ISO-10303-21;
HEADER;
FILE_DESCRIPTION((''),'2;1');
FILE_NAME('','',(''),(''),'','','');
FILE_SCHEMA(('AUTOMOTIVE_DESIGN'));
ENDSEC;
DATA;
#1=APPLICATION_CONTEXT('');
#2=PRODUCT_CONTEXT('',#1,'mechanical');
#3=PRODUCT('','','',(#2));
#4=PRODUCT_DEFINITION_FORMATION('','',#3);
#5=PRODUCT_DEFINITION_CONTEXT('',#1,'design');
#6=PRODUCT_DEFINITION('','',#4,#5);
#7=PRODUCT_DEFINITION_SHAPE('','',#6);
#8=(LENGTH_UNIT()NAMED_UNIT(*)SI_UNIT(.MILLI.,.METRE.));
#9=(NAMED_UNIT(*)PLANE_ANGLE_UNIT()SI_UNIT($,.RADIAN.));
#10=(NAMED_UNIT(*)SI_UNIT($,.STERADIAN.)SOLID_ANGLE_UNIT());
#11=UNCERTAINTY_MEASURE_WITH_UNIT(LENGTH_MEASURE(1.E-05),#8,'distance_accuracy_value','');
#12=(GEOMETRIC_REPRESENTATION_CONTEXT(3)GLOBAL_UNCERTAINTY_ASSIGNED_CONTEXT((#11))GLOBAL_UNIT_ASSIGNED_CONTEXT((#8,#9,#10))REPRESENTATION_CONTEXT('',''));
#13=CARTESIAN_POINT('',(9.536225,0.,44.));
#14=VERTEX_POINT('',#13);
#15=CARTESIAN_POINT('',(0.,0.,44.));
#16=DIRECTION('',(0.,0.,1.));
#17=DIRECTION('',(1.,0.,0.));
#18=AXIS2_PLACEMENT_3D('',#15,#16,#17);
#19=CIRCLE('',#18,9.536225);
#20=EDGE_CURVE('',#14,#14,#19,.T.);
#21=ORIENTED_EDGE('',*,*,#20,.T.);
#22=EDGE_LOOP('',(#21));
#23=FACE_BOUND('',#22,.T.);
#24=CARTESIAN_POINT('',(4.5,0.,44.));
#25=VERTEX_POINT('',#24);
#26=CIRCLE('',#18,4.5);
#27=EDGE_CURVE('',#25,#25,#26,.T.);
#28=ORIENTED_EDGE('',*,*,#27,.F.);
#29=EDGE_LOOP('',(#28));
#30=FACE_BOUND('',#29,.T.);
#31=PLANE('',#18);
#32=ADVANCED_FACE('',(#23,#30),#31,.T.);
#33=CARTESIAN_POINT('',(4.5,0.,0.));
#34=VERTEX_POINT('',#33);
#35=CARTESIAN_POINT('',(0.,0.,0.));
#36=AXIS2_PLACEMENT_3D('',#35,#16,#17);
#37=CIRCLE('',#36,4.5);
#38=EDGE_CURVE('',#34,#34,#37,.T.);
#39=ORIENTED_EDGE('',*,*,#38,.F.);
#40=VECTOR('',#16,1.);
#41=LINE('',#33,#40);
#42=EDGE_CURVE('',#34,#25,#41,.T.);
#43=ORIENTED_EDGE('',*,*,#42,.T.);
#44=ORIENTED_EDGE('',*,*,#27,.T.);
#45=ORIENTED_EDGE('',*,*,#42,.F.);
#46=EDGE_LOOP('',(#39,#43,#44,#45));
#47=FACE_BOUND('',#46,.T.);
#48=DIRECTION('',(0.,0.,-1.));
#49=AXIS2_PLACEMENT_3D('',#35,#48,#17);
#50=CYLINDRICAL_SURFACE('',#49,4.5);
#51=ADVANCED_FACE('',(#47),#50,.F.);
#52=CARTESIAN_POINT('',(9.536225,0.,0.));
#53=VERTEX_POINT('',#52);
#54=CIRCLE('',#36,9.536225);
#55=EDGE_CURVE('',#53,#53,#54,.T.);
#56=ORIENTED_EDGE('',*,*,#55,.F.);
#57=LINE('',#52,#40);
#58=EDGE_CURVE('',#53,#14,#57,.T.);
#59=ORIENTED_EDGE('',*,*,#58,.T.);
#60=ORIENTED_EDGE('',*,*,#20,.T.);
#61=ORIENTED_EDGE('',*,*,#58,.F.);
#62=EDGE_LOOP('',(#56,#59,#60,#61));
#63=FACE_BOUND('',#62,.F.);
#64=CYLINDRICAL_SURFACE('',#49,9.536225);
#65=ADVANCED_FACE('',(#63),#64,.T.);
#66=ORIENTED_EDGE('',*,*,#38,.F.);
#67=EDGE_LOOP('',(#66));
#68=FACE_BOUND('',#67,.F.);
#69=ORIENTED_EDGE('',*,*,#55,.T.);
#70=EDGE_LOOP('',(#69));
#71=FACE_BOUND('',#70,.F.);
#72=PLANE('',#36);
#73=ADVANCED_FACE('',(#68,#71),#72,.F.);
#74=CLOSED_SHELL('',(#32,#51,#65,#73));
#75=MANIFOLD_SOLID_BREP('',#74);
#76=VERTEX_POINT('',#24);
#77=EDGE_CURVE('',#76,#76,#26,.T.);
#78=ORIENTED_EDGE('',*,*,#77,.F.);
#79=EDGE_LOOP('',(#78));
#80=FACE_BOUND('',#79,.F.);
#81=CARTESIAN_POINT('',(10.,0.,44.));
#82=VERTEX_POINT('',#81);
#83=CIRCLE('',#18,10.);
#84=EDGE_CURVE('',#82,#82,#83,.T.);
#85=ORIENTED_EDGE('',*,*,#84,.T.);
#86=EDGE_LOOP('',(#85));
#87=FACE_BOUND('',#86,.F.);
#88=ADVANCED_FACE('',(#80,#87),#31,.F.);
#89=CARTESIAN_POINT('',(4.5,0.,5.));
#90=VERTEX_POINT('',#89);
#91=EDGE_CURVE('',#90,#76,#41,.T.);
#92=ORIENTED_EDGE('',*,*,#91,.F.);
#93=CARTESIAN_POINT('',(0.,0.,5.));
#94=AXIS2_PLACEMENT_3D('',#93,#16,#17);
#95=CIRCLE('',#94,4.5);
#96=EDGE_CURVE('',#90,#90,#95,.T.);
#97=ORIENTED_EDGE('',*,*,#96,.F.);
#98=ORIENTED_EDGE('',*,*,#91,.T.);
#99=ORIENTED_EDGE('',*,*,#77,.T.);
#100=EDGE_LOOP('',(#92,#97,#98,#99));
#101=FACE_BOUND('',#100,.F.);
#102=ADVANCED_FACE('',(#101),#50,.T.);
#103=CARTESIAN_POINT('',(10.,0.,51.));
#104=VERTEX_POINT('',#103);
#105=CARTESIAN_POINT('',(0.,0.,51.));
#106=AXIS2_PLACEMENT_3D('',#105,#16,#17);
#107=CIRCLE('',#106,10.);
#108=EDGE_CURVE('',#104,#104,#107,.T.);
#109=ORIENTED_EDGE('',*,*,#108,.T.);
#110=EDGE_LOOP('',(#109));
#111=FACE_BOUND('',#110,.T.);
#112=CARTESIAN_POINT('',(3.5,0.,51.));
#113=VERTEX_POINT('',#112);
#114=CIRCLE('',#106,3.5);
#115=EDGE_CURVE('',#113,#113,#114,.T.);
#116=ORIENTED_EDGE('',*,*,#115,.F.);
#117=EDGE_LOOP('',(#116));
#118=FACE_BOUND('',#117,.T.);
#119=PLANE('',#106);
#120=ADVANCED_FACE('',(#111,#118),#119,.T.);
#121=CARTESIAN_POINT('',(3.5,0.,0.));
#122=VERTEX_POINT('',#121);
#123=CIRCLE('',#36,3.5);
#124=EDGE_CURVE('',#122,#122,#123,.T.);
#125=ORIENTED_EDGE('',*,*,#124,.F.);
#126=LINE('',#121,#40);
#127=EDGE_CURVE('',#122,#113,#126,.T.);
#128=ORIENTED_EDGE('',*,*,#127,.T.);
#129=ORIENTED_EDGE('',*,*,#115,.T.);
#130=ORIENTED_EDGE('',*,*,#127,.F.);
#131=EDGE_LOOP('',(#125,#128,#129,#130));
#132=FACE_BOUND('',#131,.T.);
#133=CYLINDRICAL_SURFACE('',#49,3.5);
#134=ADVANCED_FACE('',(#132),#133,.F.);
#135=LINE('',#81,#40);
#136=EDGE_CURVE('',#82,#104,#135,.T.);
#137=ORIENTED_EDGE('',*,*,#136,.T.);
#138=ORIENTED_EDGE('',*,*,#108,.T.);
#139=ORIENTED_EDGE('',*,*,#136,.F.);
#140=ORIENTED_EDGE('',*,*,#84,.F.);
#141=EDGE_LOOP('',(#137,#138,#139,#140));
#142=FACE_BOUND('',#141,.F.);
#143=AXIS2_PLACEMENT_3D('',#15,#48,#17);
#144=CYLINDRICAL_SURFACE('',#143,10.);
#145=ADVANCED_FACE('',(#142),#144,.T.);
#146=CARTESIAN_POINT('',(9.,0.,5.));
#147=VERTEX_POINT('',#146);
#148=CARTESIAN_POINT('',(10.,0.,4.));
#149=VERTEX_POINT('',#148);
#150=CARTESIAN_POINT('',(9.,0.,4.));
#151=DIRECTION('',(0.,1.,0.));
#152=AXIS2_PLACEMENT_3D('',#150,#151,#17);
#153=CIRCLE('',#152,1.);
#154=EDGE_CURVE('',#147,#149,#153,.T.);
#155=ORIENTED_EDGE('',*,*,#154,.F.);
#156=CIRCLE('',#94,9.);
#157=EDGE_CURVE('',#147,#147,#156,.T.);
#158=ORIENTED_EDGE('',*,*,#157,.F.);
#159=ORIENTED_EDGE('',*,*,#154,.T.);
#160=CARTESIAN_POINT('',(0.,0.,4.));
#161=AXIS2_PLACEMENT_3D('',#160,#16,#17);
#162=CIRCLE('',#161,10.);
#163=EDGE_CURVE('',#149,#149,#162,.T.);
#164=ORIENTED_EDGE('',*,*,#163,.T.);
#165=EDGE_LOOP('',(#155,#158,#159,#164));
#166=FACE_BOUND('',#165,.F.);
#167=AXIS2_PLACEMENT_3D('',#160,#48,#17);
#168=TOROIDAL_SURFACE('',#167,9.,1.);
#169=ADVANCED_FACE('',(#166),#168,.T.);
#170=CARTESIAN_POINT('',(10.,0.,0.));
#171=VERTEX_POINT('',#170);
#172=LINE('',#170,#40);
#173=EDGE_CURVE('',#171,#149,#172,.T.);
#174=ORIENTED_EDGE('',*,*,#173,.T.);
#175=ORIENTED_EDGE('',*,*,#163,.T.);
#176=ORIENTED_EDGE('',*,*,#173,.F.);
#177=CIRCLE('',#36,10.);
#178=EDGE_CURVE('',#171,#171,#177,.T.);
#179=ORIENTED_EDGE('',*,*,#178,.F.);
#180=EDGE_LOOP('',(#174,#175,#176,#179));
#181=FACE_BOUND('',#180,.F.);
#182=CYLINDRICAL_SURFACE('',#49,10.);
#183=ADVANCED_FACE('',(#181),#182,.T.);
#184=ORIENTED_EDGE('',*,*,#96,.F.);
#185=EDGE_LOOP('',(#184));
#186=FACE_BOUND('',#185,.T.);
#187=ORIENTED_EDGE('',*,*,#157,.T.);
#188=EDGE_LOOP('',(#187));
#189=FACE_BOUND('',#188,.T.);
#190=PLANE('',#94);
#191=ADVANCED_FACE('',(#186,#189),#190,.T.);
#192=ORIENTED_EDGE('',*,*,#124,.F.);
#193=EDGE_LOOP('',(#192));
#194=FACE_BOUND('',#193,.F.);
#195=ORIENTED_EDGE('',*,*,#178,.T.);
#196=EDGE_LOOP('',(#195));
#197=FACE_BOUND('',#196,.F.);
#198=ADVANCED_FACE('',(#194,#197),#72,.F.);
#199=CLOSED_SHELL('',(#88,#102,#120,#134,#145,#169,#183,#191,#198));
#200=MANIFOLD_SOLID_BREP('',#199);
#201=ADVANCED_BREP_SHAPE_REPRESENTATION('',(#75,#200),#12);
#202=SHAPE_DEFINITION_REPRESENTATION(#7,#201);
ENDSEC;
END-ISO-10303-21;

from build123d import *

# Parameters (mm, degrees)
F0_R     = 10
F0_R_2   = 9.5362250702
F0_R_3   = 4.5
F1_DEPTH = 5
F2_DEPTH = 44
F0_R_4   = 3.5
F3_DEPTH = 51
F4_R     = 10
F4_R_2   = 9.5362250702
F4_R_3   = 4.5
F5_DEPTH = 7
F6_R     = 1


with BuildPart() as f1:
    # F0 (on Top) → F1 (new body)
    with BuildSketch(Plane.XY):
        Circle(F0_R)
        Circle(F0_R_2, mode=Mode.SUBTRACT)
        Circle(F0_R_2)
        Circle(F0_R_3, mode=Mode.SUBTRACT)
    extrude(amount=F1_DEPTH)

    # F0 (on Top) → F3 (join)
    with BuildSketch(Plane.XY):
        Circle(F0_R_3)
        Circle(F0_R_4, mode=Mode.SUBTRACT)
    extrude(amount=F3_DEPTH)

    # F4 (on face) → F5 (join, through all)
    with BuildSketch(Plane.XY.offset(44)):
        Circle(F4_R)
        Circle(F4_R_2, mode=Mode.SUBTRACT)
        Circle(F4_R_2)
        Circle(F4_R_3, mode=Mode.SUBTRACT)
    extrude(amount=F5_DEPTH)

    # F6
    f6_edges = [f1.edges().sort_by_distance(p)[0] for p in [
        (-10, 0, 5),
    ]]
    fillet(f6_edges, radius=F6_R)


with BuildPart() as f2:
    # F0 (on Top) → F2 (new body)
    with BuildSketch(Plane.XY):
        Circle(F0_R_2)
        Circle(F0_R_3, mode=Mode.SUBTRACT)
    extrude(amount=F2_DEPTH)


solid = Compound([f1.part, f2.part])
